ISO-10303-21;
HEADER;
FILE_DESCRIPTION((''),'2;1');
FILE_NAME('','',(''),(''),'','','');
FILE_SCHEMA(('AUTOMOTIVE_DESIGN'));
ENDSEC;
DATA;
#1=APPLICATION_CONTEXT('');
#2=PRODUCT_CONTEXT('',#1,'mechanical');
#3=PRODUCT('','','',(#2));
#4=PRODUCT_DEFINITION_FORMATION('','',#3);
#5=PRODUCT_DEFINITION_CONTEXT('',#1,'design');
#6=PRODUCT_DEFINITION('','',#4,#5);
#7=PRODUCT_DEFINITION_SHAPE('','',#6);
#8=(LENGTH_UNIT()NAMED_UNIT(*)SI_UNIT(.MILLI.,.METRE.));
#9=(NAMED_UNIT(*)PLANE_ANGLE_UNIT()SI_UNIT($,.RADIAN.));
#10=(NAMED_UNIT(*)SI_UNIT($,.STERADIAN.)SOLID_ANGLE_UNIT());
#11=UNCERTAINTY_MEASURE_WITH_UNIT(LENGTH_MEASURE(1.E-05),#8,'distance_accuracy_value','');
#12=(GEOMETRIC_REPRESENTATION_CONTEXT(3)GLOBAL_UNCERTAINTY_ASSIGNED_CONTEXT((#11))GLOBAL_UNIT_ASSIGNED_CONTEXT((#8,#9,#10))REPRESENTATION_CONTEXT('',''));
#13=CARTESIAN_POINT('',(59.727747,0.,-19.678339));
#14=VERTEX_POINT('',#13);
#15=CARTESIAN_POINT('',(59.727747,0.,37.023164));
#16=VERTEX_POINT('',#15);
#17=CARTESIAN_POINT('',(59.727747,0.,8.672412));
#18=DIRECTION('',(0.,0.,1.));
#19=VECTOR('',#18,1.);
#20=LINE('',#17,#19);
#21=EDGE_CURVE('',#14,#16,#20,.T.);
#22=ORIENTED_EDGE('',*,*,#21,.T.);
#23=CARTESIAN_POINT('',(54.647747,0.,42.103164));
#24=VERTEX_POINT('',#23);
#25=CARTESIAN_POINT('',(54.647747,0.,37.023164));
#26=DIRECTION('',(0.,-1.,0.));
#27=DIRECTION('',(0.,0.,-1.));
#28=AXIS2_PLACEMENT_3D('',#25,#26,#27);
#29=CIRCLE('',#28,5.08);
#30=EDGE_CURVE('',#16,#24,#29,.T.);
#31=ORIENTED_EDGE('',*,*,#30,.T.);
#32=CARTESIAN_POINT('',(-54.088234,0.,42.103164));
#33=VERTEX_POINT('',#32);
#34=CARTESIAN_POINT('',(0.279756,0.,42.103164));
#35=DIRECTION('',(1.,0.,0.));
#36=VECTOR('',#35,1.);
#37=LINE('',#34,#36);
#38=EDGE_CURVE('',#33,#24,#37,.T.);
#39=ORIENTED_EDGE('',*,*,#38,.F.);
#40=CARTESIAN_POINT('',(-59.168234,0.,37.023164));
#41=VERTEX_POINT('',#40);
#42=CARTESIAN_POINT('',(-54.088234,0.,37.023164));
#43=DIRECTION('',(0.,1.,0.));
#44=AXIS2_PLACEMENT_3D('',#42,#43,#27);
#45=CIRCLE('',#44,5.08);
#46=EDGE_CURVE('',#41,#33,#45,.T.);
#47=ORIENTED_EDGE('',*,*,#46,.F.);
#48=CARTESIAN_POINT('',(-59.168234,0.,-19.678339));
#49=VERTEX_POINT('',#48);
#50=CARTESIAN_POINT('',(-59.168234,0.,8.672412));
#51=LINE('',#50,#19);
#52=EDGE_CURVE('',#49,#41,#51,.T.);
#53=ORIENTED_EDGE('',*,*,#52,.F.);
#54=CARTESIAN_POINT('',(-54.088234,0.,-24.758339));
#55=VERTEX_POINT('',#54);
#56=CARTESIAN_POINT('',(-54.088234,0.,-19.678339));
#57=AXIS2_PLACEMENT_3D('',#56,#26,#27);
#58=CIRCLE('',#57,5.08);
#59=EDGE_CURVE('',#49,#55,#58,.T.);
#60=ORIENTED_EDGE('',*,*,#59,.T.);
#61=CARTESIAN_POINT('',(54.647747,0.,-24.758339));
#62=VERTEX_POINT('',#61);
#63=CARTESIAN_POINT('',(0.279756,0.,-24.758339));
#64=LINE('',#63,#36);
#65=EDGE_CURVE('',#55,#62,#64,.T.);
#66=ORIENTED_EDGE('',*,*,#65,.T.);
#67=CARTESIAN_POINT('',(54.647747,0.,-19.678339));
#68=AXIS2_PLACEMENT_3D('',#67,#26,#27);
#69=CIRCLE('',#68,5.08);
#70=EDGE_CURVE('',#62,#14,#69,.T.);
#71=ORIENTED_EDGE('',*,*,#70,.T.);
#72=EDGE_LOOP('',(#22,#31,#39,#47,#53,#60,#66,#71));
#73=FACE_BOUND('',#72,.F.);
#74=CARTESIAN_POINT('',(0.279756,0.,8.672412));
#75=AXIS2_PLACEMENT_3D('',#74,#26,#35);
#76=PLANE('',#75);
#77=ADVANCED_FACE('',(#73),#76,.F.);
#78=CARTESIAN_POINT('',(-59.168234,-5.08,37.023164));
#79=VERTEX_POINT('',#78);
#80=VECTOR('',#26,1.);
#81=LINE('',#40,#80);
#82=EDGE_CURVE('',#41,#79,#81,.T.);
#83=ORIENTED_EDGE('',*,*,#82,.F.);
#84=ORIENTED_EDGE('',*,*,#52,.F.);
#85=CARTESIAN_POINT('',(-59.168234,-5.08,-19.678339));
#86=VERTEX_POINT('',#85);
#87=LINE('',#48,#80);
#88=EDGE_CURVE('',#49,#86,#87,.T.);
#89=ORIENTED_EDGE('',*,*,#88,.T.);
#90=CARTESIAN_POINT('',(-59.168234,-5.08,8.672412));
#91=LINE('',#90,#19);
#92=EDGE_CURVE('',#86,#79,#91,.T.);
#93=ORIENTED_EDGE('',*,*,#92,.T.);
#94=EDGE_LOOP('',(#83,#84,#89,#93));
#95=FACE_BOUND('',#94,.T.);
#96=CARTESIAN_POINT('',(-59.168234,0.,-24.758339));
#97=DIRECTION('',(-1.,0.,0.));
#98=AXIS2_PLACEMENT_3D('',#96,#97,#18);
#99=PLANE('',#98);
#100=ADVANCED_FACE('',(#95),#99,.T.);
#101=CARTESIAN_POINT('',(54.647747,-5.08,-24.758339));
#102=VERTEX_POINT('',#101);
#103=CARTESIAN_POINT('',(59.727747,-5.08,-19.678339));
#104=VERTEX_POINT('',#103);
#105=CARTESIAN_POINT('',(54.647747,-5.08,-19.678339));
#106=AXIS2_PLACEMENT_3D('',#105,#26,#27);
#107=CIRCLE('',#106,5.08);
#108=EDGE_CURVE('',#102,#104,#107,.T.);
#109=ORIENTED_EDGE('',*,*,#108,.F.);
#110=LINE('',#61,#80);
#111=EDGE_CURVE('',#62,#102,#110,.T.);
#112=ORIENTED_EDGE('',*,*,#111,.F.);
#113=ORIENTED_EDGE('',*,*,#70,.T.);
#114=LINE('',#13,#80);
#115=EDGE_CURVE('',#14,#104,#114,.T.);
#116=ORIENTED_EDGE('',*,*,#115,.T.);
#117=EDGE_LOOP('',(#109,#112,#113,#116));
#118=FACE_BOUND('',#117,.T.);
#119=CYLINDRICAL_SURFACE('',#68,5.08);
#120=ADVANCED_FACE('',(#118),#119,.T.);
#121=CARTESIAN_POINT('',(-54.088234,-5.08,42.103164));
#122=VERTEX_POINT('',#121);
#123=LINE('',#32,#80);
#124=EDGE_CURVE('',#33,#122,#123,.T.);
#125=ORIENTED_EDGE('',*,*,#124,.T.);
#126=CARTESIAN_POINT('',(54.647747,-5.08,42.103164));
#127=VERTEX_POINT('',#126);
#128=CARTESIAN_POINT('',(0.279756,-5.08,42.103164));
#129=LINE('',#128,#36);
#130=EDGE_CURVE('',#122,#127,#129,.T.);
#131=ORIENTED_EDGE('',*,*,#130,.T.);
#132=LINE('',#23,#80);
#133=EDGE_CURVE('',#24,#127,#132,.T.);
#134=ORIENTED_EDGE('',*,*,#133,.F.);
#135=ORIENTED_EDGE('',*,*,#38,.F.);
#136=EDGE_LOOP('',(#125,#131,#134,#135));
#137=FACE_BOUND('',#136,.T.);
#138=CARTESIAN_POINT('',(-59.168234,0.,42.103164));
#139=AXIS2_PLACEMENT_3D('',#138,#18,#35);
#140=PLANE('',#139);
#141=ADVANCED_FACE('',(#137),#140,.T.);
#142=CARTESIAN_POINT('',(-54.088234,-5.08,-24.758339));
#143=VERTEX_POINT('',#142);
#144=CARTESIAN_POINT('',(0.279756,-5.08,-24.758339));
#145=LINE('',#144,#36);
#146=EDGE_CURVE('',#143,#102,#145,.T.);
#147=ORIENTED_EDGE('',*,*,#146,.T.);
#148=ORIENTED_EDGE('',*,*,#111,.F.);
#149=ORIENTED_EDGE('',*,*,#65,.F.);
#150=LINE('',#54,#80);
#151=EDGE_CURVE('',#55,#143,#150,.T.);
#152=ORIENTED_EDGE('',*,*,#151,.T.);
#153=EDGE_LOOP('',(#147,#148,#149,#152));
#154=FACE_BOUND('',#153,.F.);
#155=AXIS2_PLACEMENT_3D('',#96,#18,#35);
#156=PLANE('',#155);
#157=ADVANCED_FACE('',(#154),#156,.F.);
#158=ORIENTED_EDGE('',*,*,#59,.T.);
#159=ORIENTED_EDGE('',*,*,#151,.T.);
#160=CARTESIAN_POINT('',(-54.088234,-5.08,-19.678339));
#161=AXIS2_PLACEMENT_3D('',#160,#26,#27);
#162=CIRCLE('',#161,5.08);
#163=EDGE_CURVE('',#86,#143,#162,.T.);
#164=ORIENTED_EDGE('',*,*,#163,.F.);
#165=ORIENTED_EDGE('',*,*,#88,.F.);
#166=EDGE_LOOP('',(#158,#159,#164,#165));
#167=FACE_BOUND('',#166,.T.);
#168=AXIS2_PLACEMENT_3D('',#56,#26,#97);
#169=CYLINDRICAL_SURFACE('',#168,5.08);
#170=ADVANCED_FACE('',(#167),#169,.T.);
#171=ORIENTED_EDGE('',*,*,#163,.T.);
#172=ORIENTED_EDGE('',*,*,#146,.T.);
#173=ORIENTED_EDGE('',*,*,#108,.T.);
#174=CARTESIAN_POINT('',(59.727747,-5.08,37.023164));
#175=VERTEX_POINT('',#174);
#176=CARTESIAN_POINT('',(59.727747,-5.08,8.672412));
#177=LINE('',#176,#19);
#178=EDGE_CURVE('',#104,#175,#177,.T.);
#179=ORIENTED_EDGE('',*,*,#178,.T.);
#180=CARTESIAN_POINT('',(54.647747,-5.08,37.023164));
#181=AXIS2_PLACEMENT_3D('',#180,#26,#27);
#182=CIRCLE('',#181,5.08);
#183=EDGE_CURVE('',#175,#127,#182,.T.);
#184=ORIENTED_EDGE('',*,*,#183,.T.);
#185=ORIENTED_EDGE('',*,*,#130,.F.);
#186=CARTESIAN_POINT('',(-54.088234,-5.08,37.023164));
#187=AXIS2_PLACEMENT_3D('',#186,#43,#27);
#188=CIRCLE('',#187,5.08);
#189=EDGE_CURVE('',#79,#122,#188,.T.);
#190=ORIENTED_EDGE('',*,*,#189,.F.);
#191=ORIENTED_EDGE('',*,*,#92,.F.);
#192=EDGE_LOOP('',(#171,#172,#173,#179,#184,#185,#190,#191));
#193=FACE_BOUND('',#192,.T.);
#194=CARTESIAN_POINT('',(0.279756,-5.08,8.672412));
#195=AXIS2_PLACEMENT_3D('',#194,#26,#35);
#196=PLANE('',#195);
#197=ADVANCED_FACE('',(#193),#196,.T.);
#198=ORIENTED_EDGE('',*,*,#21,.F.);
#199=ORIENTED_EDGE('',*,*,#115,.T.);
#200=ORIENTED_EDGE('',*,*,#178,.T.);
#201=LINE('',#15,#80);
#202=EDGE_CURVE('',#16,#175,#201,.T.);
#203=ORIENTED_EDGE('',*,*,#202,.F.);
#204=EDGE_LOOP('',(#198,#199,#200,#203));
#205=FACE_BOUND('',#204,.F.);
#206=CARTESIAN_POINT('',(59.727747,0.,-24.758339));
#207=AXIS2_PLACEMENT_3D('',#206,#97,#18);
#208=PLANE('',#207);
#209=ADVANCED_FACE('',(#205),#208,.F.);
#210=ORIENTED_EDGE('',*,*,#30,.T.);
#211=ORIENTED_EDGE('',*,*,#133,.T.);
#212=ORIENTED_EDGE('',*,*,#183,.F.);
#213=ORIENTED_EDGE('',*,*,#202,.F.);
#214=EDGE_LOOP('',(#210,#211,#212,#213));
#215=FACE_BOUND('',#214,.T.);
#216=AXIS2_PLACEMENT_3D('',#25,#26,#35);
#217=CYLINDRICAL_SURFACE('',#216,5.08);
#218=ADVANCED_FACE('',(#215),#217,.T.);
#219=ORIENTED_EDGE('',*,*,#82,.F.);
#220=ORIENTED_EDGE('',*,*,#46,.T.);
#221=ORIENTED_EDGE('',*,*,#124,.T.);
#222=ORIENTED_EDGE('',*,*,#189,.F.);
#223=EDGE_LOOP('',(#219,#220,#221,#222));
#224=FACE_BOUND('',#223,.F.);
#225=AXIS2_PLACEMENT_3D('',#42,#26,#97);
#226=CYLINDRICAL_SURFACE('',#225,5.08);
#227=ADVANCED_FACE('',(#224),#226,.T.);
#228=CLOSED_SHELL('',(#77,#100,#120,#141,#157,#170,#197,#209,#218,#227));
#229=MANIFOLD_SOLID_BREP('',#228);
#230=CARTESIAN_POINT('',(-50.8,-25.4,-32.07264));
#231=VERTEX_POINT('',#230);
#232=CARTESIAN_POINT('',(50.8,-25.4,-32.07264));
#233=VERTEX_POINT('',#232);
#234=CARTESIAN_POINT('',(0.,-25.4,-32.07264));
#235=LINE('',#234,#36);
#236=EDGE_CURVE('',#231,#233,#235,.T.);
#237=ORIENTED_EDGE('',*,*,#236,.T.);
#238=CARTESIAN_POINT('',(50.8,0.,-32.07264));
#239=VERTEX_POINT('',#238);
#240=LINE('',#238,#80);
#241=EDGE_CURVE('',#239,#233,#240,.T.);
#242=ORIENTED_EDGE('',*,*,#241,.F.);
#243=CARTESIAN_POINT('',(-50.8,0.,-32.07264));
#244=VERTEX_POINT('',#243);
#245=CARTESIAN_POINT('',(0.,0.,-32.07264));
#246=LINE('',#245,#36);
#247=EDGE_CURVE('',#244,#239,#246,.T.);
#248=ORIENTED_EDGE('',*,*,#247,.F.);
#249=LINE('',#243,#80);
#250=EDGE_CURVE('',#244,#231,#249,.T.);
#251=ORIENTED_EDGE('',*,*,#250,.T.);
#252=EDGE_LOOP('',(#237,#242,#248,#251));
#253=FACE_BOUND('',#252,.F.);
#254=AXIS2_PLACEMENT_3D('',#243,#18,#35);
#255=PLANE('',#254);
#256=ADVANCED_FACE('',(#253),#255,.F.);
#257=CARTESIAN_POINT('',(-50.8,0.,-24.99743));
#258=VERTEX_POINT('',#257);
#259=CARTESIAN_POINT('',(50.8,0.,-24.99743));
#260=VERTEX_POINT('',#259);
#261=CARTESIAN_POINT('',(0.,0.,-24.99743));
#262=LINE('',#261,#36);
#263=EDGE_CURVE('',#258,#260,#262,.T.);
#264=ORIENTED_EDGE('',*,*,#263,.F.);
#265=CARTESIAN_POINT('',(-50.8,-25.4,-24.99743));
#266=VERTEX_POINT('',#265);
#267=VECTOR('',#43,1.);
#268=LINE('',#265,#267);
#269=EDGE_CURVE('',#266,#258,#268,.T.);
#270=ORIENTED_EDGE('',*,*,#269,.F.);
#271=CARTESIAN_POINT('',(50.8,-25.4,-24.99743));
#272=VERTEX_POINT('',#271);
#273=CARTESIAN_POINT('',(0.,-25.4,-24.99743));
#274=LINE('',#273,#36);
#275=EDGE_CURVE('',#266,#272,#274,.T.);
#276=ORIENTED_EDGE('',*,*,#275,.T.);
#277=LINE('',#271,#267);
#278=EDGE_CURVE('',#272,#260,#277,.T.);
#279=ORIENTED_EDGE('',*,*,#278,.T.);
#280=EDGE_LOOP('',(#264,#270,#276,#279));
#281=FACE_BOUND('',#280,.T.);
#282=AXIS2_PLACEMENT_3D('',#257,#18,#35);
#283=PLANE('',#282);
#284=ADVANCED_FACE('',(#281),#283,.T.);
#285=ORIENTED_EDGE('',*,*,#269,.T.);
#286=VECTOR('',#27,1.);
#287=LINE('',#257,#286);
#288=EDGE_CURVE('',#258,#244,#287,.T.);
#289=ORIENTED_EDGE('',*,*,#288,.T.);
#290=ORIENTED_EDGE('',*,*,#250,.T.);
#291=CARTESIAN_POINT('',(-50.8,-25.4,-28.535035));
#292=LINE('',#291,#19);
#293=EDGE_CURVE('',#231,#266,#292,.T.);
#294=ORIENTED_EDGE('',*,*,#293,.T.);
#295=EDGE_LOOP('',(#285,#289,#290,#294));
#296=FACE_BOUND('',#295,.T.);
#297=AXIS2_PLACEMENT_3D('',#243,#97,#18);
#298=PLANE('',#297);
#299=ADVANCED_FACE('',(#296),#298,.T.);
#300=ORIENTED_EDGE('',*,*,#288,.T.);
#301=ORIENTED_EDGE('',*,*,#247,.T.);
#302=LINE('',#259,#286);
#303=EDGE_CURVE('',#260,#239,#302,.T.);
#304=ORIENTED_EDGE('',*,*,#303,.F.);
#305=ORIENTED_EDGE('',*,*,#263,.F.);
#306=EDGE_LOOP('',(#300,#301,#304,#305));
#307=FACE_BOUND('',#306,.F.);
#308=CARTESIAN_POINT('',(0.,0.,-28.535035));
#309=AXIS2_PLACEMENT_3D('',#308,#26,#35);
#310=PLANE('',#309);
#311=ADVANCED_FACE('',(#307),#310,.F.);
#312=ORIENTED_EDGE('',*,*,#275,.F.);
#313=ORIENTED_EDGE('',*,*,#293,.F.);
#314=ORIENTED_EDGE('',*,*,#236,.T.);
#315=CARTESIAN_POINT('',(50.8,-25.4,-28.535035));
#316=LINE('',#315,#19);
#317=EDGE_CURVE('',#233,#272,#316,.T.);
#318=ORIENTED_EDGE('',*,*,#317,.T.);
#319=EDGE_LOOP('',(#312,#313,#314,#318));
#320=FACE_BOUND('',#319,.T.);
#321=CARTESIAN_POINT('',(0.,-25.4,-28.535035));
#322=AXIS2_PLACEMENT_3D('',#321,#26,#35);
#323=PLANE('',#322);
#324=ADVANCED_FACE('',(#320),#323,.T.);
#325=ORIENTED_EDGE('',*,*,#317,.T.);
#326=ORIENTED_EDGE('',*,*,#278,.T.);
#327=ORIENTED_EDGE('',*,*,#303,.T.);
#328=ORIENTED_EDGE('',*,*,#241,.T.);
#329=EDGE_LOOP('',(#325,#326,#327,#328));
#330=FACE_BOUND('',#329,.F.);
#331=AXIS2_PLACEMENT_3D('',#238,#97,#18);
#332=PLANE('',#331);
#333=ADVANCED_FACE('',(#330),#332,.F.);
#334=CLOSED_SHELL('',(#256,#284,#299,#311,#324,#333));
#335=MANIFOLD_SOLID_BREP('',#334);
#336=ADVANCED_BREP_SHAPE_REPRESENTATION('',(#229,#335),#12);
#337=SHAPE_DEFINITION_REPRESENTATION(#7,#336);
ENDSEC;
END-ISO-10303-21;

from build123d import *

# Parameters (mm, degrees)
F0_W        = 118.8959814608
F0_H        = 66.8615028262
F1_DEPTH    = 5.08
F2_R        = 5.08
F3_W        = 101.6
F3_H        = 7.0752100054
F4_DEPTH    = 25.4
F5_R        = 5.08
F6_T1_DEPTH = 127
F6_T3_DEPTH = 14.6952100054
F6_T5_DEPTH = 33.02
F6_T8_ANGLE = 90
F7_DEPTH    = 25.4


# Not quite as in the source:
# - a fillet or chamfer that OpenCascade refuses, or shapes differently, is made with other operations: its cross-section is extruded or revolved along the edge and cut away or added


with BuildPart() as f1:
    # F0 (on Front) → F1 (new body)
    with BuildSketch(Plane.XZ):
        with Locations((0.2797562629, 8.6724124849)):
            Rectangle(F0_W, F0_H)
    extrude(amount=F1_DEPTH)

    # F2
    f2_edges = [f1.edges().sort_by_distance(p)[0] for p in [
        (59.727747, -2.54, 42.103164),
        (-59.168234, -2.54, 42.103164),
        (-59.168234, -2.54, -24.758339),
        (59.727747, -2.54, -24.758339),
    ]]
    fillet(f2_edges, radius=F2_R)


with BuildPart() as f4:
    # F3 (on Front) → F4 (new body)
    with BuildSketch(Plane.XZ):
        with Locations((0, -28.5350345075)):
            Rectangle(F3_W, F3_H)
    extrude(amount=F4_DEPTH)

    # F5
    f5_edges = [f4.edges().sort_by_distance(p)[0] for p in [
        (0, -25.4, -32.07264),
    ]]
    fillet(f5_edges, radius=F5_R)

    # F6: fillet of radius 5.08 on 3 edges, made by hand

    # F6_s2 → F6_t1 (cut)
    with BuildSketch(Plane.YZ.offset(-63.5)):
        with BuildLine():
            ThreePointArc((-5.08, -32.0726395102), (-1.4878975516, -30.5847419586), (0, -26.9926395102))
            Line((0, -26.9926395102), (0, -32.0726395102))
            Line((0, -32.0726395102), (-5.08, -32.0726395102))
        make_face()
        with BuildLine():
            ThreePointArc((-25.4, -30.0774295048), (-23.9121024484, -26.4853270564), (-20.32, -24.9974295048))
            Line((-20.32, -24.9974295048), (-25.4, -24.9974295048))
            Line((-25.4, -24.9974295048), (-25.4, -30.0774295048))
        make_face()
    extrude(amount=F6_T1_DEPTH, mode=Mode.SUBTRACT)

    # F6_s4 → F6_t3 (cut)
    with BuildSketch(Plane.XY.offset(-26.9926395102)):
        with BuildLine():
            ThreePointArc((-45.72, -25.4), (-49.3121024484, -23.9121024484), (-50.8, -20.32))
            Line((-50.8, -20.32), (-50.8, -25.4))
            Line((-50.8, -25.4), (-45.72, -25.4))
        make_face()
    extrude(amount=F6_T3_DEPTH, mode=Mode.SUBTRACT)

    # F6_s6 → F6_t5 (cut)
    with BuildSketch(Plane.XZ.offset(-12.7)):
        with BuildLine():
            ThreePointArc((-45.72, -32.0726395102), (-49.3121024484, -30.5847419586), (-50.8, -26.9926395102))
            Line((-50.8, -26.9926395102), (-50.8, -32.0726395102))
            Line((-50.8, -32.0726395102), (-45.72, -32.0726395102))
        make_face()
    extrude(amount=F6_T5_DEPTH, mode=Mode.SUBTRACT)

    # F6_s7 → F6_t8 (revolve, cut)
    with BuildSketch(Plane.XZ.offset(20.32)):
        with BuildLine():
            ThreePointArc((-45.72, -32.0726395102), (-49.3121024484, -30.5847419586), (-50.8, -26.9926395102))
            Line((-50.8, -26.9926395102), (-50.8, -32.0726395102))
            Line((-50.8, -32.0726395102), (-45.72, -32.0726395102))
        make_face()
    revolve(axis=Axis((-50.8, -20.32, -26.9926395102), (-1, 0, 0)), revolution_arc=F6_T8_ANGLE, mode=Mode.SUBTRACT)

    # F3 (on Front) → F7 (join)
    with BuildSketch(Plane.XZ):
        with Locations((0, -28.5350345075)):
            Rectangle(F3_W, F3_H)
    extrude(amount=F7_DEPTH)


solid = Compound([f1.part, f4.part])
